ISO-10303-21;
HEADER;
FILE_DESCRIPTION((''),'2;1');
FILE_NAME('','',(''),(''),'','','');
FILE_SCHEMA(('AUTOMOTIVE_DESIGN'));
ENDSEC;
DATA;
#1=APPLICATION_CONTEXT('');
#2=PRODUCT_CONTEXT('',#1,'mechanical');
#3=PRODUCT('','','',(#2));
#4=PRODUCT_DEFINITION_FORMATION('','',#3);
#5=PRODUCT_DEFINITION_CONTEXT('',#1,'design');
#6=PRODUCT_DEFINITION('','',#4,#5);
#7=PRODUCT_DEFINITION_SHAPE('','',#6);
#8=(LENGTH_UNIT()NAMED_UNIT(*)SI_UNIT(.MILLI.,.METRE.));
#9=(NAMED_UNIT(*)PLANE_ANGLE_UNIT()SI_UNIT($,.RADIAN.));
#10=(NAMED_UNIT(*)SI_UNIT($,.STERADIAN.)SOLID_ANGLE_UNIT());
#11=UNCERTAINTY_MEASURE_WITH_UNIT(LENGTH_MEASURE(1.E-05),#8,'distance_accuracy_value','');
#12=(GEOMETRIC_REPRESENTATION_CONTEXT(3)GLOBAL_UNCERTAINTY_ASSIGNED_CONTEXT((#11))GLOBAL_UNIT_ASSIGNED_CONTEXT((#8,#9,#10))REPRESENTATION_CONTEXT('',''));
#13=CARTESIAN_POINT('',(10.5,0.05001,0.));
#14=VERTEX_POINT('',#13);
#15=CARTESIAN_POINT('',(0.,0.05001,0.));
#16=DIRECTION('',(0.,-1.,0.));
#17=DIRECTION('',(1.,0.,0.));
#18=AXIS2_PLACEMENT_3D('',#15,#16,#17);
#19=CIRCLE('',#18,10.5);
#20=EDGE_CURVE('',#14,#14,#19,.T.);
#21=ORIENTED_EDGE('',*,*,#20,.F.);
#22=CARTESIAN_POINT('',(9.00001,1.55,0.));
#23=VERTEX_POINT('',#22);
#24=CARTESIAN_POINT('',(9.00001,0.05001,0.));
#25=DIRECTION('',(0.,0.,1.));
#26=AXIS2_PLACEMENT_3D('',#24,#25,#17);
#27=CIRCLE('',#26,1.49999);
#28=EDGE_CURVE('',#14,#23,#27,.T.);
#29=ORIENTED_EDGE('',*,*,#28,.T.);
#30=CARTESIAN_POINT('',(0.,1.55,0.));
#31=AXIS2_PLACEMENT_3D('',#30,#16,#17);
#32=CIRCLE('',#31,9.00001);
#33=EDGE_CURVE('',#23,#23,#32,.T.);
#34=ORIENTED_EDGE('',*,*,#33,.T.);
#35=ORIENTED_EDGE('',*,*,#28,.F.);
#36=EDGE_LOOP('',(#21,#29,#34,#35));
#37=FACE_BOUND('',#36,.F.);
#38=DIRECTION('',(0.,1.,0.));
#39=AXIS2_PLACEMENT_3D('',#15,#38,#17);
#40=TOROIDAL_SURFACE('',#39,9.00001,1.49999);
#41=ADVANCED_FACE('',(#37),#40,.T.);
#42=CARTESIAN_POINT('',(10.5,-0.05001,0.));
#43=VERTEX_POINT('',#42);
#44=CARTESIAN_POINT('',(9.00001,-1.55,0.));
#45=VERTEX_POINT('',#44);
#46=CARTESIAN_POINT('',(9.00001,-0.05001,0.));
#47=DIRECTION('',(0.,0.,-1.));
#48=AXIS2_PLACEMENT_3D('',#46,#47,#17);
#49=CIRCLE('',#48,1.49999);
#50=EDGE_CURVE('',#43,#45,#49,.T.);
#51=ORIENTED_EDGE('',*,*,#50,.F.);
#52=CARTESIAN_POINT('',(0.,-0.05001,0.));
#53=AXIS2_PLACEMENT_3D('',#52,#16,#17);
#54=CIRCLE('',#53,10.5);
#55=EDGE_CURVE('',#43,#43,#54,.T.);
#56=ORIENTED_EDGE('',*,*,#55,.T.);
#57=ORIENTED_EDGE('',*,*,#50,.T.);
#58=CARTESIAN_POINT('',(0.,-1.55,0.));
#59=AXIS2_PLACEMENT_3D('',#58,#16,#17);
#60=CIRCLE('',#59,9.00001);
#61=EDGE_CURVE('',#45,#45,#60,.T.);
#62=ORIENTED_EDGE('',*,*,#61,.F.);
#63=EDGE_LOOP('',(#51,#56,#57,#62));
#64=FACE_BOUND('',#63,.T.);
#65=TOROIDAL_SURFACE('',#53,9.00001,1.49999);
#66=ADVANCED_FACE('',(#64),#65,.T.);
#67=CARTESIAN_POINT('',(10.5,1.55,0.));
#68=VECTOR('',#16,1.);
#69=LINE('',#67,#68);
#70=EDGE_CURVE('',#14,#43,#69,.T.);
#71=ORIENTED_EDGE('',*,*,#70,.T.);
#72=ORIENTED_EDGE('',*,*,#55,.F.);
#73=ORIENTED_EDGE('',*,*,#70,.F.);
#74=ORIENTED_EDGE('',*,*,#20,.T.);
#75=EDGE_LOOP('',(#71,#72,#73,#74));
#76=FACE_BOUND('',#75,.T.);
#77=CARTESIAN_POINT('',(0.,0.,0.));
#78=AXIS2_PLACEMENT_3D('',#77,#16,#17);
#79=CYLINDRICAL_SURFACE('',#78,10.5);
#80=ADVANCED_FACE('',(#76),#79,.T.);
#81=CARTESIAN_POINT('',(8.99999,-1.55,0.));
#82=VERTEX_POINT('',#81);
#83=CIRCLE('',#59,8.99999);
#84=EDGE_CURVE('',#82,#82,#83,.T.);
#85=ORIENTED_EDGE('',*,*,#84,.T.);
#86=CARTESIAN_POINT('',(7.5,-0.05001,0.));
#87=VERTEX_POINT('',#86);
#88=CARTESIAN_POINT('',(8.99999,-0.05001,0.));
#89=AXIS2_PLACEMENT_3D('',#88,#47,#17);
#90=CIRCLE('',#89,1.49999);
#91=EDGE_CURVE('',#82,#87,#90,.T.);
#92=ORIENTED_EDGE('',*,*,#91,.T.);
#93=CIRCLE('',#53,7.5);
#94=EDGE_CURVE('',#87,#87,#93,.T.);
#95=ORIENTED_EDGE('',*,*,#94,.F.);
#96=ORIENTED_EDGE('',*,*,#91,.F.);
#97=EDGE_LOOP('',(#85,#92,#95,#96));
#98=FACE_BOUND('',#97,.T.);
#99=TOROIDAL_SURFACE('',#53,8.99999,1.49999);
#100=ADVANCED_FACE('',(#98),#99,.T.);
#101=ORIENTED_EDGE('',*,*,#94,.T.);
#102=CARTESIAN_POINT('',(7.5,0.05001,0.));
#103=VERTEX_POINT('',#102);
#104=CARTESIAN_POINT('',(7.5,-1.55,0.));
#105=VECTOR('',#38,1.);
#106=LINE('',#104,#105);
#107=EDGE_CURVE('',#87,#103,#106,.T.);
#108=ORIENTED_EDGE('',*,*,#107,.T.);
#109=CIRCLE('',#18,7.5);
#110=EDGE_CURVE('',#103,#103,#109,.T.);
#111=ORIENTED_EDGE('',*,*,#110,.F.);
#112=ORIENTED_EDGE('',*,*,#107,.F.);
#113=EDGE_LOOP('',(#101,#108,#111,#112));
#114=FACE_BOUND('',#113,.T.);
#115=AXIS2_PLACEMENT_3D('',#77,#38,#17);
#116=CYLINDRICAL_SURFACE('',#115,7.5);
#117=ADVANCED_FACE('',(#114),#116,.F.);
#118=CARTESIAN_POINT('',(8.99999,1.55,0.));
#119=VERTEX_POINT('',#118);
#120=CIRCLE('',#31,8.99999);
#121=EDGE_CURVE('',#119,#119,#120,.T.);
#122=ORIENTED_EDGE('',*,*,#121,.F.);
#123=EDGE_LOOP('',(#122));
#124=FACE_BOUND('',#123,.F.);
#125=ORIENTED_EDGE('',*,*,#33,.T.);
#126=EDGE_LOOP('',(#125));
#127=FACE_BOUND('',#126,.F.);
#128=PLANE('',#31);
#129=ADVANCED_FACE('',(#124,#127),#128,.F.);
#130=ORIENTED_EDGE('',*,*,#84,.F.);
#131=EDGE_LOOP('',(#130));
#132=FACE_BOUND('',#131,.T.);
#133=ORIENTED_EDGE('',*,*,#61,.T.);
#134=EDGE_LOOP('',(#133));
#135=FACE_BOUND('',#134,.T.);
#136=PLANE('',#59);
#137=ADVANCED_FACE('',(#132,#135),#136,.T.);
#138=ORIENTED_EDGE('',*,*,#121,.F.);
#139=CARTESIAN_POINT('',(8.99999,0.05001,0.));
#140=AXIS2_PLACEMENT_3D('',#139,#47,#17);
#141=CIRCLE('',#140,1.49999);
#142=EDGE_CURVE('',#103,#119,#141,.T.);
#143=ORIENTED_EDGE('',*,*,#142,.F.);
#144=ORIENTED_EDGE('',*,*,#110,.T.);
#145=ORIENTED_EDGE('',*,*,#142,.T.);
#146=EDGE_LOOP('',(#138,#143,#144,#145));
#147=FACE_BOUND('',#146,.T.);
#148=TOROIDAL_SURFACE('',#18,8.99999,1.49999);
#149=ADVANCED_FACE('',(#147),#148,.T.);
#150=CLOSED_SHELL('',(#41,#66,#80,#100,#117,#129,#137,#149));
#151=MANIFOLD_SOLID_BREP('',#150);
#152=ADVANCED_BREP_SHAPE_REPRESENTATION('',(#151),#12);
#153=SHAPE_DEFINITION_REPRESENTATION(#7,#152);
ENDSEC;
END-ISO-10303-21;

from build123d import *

# Parameters (mm, degrees)
F0_R     = 10.5
F0_R_2   = 7.5
F1_DEPTH = 1.55
F2_R     = 1.49999


# Not quite as in the source:
# - a fillet or chamfer is up to 0.001 mm smaller than in the source, because OpenCascade refuses the exact size


with BuildPart() as f1:
    # F0 (on Front) → F1 (new body, symmetric)
    with BuildSketch(Plane.XZ):
        Circle(F0_R)
        Circle(F0_R_2, mode=Mode.SUBTRACT)
    extrude(amount=F1_DEPTH, both=True)

    # F2 (radius 1.5 in the source; OpenCascade refuses exactly that, so slightly less here)
    f2_edges = [f1.edges().sort_by_distance(p)[0] for p in [
        (-10.5, -1.55, 0),
        (-10.5, 1.55, 0),
        (-7.5, 1.55, 0),
        (-7.5, -1.55, 0),
    ]]
    fillet(f2_edges, radius=F2_R)


solid = f1.part
